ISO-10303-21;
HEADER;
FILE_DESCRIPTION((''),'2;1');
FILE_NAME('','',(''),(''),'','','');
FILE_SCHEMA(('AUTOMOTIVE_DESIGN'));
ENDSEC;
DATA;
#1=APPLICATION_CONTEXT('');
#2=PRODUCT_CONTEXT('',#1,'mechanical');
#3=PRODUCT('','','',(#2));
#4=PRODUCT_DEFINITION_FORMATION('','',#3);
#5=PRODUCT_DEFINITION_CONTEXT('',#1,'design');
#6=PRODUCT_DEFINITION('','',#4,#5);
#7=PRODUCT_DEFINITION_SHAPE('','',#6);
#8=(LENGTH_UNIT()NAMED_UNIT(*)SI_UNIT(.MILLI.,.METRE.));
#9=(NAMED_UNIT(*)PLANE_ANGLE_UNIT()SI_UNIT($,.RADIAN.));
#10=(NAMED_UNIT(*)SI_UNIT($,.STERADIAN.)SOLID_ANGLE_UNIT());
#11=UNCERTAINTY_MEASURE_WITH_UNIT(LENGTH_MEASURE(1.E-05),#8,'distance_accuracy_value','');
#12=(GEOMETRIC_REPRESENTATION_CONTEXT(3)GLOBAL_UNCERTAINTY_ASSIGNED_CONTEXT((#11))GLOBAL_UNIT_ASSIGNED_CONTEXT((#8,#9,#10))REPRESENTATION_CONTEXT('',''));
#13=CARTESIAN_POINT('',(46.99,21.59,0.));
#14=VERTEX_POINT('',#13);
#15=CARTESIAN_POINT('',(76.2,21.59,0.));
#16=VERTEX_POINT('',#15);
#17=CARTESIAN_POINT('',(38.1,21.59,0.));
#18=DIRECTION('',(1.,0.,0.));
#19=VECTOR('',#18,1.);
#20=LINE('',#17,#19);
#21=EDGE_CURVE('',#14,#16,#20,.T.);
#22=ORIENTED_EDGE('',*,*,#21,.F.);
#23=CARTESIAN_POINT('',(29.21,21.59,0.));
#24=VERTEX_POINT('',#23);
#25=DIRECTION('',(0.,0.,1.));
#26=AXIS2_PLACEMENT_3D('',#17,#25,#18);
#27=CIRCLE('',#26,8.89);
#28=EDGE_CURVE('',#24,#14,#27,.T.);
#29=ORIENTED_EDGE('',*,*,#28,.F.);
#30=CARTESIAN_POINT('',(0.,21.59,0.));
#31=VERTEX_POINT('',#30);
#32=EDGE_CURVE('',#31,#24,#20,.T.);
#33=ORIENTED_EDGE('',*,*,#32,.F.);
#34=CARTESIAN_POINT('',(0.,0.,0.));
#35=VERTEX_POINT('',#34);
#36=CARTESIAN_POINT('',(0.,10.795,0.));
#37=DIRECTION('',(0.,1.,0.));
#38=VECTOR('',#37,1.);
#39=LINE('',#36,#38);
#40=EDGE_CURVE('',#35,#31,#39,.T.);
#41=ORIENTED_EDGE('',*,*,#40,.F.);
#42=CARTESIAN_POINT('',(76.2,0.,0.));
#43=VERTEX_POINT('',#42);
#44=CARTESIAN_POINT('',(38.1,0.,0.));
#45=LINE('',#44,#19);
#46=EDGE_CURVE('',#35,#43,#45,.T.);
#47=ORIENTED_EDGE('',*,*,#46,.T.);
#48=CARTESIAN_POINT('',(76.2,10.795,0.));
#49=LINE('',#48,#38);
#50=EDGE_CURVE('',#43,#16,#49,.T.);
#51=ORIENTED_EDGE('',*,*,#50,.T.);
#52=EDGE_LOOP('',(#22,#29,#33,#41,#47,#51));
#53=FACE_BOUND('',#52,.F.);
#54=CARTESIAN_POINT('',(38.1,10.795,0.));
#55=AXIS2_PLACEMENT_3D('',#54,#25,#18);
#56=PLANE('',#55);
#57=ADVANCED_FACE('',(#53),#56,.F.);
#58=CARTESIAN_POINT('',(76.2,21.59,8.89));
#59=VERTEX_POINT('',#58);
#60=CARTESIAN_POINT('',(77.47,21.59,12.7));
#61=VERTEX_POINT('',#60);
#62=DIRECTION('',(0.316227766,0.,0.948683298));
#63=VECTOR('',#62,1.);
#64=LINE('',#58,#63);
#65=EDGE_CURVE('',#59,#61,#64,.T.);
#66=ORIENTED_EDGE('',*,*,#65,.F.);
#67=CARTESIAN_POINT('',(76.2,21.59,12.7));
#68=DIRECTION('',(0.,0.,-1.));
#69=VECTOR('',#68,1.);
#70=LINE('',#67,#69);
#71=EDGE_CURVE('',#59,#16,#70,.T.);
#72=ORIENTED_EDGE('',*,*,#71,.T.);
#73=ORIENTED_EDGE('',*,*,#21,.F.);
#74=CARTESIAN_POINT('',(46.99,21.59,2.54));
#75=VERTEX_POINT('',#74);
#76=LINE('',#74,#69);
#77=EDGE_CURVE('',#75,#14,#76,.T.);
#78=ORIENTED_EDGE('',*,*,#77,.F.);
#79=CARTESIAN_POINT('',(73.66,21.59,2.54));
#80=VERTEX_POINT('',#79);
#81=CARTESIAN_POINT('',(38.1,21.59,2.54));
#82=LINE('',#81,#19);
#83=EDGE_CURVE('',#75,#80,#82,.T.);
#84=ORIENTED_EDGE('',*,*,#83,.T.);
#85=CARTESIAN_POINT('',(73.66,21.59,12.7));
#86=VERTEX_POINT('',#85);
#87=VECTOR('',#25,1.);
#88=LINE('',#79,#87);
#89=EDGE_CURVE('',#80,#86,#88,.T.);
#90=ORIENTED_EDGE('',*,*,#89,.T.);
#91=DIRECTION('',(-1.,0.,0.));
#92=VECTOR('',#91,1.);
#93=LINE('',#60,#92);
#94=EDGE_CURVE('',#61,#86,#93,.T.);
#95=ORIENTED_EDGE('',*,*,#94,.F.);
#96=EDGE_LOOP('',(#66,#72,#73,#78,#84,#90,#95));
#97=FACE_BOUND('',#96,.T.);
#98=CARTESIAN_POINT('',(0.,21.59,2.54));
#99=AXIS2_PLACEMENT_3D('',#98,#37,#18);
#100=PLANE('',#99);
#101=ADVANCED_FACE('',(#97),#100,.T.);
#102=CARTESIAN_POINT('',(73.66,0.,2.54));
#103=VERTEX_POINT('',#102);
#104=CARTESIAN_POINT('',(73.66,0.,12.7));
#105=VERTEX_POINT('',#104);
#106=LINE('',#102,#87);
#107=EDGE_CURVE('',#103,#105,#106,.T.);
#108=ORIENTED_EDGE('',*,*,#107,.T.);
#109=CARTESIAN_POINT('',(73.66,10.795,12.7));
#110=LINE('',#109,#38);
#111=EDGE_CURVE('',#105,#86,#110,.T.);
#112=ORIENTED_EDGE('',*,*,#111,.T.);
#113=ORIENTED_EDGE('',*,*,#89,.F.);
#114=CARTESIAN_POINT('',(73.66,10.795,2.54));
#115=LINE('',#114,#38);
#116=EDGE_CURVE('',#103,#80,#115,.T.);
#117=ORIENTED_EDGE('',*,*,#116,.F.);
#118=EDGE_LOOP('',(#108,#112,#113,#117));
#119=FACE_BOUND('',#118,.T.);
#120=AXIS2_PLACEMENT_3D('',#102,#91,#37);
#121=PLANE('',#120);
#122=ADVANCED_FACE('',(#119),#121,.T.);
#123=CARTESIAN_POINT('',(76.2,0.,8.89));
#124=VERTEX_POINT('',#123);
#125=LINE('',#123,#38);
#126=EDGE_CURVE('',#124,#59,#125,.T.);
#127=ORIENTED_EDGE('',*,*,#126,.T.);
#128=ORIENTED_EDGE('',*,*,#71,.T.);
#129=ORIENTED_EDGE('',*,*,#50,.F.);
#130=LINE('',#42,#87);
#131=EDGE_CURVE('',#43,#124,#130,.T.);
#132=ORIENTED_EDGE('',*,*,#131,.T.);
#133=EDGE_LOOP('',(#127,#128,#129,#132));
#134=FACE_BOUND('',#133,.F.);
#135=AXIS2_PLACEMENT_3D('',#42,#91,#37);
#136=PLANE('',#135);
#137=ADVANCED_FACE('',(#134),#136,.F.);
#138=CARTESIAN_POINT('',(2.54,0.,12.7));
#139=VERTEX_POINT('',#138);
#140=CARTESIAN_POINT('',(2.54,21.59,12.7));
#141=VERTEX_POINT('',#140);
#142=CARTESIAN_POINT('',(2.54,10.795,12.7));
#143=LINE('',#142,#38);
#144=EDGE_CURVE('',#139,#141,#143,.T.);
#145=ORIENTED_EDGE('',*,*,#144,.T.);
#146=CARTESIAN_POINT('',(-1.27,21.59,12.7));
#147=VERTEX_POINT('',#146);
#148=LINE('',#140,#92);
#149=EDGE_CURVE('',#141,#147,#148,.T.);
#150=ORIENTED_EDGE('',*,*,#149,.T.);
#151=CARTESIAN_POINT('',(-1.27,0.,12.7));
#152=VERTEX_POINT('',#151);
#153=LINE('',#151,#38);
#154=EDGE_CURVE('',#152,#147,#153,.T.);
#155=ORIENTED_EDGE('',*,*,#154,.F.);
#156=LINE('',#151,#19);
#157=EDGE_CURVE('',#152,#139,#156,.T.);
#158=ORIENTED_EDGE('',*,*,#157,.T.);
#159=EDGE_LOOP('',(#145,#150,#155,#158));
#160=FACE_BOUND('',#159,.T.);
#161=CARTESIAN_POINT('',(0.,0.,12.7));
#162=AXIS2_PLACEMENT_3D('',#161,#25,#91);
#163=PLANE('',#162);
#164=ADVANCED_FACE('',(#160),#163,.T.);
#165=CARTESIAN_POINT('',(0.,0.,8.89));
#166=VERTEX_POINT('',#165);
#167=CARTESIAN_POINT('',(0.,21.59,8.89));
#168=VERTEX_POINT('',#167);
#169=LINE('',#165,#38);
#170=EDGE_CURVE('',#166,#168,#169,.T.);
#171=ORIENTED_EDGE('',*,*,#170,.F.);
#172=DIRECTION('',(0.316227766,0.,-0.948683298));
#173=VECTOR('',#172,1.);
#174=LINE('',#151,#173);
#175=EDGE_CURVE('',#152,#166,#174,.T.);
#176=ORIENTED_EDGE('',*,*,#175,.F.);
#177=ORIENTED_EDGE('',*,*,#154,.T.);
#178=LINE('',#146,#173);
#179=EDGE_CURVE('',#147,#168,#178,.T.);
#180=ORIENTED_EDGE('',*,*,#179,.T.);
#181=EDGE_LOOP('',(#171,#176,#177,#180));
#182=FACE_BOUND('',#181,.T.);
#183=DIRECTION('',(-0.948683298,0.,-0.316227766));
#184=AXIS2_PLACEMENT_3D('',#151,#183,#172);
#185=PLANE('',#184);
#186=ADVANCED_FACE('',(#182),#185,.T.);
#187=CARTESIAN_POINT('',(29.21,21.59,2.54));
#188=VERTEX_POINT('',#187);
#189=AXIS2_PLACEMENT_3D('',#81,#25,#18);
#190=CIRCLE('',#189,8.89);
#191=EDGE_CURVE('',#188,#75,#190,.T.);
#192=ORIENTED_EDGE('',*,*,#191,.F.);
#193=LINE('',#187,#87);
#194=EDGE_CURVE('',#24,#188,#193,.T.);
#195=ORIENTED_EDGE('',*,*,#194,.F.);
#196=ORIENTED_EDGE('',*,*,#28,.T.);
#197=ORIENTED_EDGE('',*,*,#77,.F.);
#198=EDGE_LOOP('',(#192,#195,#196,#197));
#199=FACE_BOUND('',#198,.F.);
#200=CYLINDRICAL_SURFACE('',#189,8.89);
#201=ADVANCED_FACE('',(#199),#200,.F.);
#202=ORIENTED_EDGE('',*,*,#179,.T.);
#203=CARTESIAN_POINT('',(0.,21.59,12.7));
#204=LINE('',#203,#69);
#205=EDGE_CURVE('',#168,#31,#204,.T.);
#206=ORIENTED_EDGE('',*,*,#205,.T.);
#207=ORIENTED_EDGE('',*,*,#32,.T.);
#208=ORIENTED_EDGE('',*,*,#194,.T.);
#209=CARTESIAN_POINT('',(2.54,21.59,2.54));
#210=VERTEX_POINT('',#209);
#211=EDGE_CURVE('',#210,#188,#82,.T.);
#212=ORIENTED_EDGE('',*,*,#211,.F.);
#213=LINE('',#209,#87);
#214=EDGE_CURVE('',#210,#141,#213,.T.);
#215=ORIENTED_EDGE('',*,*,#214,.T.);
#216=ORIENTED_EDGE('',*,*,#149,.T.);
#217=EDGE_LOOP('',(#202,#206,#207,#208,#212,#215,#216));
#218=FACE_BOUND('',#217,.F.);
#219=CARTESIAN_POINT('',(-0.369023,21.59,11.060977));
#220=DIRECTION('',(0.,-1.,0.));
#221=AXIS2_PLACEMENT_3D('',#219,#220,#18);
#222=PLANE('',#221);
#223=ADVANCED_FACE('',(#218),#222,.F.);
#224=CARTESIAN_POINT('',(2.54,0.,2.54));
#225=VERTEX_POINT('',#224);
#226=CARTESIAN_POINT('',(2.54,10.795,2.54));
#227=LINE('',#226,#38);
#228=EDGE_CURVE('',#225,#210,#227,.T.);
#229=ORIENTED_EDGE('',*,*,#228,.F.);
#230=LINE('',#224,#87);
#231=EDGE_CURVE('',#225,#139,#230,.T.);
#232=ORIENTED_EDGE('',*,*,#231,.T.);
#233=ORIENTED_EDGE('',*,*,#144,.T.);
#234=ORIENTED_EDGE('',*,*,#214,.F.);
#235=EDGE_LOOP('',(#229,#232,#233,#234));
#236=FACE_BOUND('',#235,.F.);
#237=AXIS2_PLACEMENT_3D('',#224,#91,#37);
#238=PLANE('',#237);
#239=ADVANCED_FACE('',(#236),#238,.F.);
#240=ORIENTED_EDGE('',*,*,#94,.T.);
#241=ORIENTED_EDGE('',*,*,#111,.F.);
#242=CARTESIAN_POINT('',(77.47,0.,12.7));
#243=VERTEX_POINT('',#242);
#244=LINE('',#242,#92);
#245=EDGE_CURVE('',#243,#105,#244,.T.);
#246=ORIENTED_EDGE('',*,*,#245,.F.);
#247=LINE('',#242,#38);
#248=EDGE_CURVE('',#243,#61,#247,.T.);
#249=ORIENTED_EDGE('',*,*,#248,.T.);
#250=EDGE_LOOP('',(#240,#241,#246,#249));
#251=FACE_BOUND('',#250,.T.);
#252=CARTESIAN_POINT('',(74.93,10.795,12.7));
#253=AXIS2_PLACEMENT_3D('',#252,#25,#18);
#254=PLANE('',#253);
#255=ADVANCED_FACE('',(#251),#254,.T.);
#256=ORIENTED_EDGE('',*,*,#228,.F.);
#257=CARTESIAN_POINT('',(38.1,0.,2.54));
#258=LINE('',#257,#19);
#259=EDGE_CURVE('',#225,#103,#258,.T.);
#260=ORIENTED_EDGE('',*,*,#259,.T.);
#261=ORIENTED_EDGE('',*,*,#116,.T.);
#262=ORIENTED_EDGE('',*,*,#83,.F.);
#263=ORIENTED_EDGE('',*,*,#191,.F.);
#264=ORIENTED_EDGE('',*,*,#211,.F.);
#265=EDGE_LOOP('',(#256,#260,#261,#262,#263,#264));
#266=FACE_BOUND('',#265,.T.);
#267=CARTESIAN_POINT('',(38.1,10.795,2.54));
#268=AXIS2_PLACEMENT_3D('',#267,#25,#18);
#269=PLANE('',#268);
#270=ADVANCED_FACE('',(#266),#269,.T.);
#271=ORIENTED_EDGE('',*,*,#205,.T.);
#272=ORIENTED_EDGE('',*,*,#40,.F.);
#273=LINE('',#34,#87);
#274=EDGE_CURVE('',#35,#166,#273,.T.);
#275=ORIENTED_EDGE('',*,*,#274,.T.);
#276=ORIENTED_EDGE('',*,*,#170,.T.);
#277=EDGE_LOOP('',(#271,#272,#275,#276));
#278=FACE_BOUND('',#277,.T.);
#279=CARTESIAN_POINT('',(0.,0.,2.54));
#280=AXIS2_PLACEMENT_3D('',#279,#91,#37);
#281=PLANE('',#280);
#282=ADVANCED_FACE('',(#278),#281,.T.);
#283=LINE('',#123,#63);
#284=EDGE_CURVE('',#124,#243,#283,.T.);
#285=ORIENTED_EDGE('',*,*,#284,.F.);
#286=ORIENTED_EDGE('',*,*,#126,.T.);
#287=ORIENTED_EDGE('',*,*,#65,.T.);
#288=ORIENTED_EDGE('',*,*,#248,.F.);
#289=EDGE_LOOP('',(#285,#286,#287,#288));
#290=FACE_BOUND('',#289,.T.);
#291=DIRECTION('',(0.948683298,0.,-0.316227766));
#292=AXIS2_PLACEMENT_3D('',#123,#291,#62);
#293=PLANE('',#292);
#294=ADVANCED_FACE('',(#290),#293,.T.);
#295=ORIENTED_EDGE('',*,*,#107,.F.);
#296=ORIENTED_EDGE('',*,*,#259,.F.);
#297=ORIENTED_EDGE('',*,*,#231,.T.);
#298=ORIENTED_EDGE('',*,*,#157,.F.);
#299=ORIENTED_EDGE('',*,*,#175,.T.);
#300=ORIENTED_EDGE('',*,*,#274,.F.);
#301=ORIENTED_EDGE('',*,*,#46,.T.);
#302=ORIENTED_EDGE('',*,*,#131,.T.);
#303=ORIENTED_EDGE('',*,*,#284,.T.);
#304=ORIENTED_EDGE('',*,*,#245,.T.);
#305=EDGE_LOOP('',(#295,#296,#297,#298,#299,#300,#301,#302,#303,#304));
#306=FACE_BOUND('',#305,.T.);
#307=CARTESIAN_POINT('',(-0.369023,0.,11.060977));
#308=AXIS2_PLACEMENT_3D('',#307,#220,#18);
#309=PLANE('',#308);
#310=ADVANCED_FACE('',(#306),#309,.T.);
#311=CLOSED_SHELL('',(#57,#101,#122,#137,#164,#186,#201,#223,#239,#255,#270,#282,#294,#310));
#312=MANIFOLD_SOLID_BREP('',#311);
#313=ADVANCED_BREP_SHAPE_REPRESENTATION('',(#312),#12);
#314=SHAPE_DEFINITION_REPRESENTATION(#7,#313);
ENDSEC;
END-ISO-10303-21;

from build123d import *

# Parameters (mm, degrees)
F0_W     = 76.2
F0_H     = 21.59
F1_DEPTH = 2.54
F2_W     = 2.54
F2_H     = 21.59
F3_DEPTH = 10.16
F5_DEPTH = 25.4
F7_DEPTH = 21.59


# Not quite as in the source:
# - a feature names something its author has since deleted; it is built from what else it names


with BuildPart() as f1:
    # F0 (on Top) → F1 (new body)
    with BuildSketch(Plane.XY):
        with Locations((38.1, 10.795)):
            Rectangle(F0_W, F0_H)
    extrude(amount=F1_DEPTH)

    # F2 (on face) → F3 (join)
    with BuildSketch(Plane.XY.offset(2.54)):
        with Locations((1.27, 10.795)):
            Rectangle(F2_W, F2_H)
        with Locations((74.93, 10.795)):
            Rectangle(F2_W, F2_H)
    extrude(amount=F3_DEPTH)

    # F4 (on face) → F5 (cut)
    with BuildSketch(Plane.XY.offset(2.54)):
        with BuildLine():
            ThreePointArc((29.21, 21.59), (38.1, 12.7), (46.99, 21.59))
            Line((46.99, 21.59), (29.21, 21.59))
        make_face()
        with BuildLine():
            Line((29.21, 21.59), (46.99, 21.59))
            ThreePointArc((46.99, 21.59), (38.1, 30.48), (29.21, 21.59))
        make_face()
    extrude(amount=-F5_DEPTH, mode=Mode.SUBTRACT)

    # F6 (on face) → F7 (join, through all)
    with BuildSketch(Plane.XZ):
        Polygon((0, 8.89), (0, 12.7), (-1.27, 12.7), align=None)
        Polygon((76.2, 12.7), (76.2, 8.89), (77.47, 12.7), align=None)
    extrude(amount=-F7_DEPTH)


solid = f1.part
